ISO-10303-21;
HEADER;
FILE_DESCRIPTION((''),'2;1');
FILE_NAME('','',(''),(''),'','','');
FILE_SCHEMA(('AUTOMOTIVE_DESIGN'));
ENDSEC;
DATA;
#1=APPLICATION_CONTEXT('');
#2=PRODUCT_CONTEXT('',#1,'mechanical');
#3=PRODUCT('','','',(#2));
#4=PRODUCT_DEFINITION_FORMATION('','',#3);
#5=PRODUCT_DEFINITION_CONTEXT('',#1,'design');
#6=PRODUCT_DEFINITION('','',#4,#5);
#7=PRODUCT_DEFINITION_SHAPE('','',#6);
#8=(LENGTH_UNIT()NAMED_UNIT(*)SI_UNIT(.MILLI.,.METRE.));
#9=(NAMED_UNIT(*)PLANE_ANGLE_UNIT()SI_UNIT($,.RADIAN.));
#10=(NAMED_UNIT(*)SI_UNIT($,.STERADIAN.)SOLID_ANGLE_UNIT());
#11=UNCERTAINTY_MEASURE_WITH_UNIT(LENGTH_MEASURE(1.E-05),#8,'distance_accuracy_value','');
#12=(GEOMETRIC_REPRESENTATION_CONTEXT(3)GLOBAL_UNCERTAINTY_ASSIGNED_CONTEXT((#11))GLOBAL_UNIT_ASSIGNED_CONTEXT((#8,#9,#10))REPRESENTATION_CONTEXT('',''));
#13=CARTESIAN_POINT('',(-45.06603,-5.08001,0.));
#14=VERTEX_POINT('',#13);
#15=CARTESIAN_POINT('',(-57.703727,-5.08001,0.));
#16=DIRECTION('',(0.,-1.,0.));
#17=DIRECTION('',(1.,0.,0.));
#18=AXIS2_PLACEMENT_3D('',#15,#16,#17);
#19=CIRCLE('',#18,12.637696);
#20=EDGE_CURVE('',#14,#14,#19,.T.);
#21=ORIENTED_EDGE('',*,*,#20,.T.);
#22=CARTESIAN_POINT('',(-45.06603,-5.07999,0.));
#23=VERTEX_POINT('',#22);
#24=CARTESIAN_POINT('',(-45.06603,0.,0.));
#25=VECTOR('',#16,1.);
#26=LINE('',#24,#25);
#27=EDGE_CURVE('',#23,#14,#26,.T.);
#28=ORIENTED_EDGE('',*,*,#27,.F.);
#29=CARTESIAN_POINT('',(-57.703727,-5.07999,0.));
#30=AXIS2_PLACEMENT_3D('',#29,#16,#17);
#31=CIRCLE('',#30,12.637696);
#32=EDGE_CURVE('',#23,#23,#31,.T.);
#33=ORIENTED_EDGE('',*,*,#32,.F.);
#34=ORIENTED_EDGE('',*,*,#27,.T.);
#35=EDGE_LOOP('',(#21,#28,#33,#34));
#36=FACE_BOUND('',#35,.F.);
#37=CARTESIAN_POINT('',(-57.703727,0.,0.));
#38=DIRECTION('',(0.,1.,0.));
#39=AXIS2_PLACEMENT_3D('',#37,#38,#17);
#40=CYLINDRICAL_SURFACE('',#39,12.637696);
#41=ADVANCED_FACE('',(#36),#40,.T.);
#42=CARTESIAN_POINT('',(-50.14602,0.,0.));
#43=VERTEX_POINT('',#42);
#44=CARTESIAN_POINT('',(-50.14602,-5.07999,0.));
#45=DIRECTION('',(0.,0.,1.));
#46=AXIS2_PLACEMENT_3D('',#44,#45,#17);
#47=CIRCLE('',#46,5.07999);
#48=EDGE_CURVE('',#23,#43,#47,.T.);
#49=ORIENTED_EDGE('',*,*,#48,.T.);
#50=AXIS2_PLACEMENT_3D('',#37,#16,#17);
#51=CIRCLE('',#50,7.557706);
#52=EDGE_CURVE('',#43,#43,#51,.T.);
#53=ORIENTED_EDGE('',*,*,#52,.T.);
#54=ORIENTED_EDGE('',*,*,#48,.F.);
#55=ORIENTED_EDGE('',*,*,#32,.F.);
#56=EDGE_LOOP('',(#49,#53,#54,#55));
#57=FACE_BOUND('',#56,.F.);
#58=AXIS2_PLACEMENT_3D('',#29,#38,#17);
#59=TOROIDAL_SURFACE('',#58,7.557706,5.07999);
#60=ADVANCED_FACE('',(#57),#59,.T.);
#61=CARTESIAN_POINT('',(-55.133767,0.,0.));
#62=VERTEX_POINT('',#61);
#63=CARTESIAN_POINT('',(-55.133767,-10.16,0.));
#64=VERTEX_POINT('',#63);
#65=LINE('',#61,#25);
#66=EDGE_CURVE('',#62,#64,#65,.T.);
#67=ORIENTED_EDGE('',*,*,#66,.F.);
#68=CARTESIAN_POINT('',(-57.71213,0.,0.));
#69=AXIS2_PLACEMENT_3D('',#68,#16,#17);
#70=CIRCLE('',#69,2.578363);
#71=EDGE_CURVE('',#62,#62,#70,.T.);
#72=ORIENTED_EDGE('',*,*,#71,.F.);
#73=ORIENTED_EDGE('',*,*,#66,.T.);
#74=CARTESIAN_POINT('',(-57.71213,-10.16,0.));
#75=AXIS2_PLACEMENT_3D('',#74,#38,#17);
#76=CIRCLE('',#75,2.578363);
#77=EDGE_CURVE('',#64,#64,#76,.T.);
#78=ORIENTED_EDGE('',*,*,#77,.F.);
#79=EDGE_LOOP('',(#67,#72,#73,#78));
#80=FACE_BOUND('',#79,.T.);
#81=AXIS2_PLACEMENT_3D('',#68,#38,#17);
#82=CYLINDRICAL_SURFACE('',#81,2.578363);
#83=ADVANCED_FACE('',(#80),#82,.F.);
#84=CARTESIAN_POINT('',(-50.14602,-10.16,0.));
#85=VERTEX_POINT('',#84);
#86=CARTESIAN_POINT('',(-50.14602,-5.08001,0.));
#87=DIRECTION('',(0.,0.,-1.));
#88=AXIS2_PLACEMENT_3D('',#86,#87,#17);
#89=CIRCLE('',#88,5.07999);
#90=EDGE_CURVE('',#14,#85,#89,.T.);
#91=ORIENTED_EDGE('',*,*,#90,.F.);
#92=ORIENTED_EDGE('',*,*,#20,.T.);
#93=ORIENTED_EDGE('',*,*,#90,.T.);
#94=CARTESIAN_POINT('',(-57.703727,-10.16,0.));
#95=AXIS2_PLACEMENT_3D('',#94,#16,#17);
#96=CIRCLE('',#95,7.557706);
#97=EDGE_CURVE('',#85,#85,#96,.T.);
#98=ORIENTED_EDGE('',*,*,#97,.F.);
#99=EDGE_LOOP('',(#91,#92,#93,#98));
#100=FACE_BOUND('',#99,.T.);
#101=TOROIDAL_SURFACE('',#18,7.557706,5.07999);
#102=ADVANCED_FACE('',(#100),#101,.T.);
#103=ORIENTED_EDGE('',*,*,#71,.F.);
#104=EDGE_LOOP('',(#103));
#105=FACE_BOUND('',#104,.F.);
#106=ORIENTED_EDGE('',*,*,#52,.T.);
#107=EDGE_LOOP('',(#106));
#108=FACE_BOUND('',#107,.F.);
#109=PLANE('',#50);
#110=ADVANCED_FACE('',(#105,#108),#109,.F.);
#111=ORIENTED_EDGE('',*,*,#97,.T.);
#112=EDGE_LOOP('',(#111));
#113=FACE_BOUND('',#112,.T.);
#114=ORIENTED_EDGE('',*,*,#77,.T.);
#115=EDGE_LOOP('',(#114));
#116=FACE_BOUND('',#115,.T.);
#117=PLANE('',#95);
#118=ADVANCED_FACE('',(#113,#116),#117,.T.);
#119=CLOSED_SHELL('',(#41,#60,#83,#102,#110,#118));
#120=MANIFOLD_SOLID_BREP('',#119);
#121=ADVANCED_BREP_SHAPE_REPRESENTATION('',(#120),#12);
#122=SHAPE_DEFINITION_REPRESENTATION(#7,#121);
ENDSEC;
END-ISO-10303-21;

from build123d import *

# Parameters (mm, degrees)
F0_R     = 12.6376963258
F1_DEPTH = 10.16
F2_R     = 5.07999
F3_R     = 2.5783631355
F4_DEPTH = 25.4


# Not quite as in the source:
# - a fillet or chamfer is up to 0.001 mm smaller than in the source, because OpenCascade refuses the exact size


with BuildPart() as f1:
    # F0 (on Front) → F1 (new body)
    with BuildSketch(Plane.XZ):
        with Locations((-57.7037265382, 0)):
            Circle(F0_R)
    extrude(amount=F1_DEPTH)

    # F2 (radius 5.08 in the source; OpenCascade refuses exactly that, so slightly less here)
    f2_edges = [f1.edges().sort_by_distance(p)[0] for p in [
        (-70.341423, 0, 0),
        (-70.341423, -10.16, 0),
    ]]
    fillet(f2_edges, radius=F2_R)

    # F3 (on Front) → F4 (cut)
    with BuildSketch(Plane.XZ):
        with Locations((-57.7121302485, 0)):
            Circle(F3_R)
    extrude(amount=F4_DEPTH, mode=Mode.SUBTRACT)


solid = f1.part
